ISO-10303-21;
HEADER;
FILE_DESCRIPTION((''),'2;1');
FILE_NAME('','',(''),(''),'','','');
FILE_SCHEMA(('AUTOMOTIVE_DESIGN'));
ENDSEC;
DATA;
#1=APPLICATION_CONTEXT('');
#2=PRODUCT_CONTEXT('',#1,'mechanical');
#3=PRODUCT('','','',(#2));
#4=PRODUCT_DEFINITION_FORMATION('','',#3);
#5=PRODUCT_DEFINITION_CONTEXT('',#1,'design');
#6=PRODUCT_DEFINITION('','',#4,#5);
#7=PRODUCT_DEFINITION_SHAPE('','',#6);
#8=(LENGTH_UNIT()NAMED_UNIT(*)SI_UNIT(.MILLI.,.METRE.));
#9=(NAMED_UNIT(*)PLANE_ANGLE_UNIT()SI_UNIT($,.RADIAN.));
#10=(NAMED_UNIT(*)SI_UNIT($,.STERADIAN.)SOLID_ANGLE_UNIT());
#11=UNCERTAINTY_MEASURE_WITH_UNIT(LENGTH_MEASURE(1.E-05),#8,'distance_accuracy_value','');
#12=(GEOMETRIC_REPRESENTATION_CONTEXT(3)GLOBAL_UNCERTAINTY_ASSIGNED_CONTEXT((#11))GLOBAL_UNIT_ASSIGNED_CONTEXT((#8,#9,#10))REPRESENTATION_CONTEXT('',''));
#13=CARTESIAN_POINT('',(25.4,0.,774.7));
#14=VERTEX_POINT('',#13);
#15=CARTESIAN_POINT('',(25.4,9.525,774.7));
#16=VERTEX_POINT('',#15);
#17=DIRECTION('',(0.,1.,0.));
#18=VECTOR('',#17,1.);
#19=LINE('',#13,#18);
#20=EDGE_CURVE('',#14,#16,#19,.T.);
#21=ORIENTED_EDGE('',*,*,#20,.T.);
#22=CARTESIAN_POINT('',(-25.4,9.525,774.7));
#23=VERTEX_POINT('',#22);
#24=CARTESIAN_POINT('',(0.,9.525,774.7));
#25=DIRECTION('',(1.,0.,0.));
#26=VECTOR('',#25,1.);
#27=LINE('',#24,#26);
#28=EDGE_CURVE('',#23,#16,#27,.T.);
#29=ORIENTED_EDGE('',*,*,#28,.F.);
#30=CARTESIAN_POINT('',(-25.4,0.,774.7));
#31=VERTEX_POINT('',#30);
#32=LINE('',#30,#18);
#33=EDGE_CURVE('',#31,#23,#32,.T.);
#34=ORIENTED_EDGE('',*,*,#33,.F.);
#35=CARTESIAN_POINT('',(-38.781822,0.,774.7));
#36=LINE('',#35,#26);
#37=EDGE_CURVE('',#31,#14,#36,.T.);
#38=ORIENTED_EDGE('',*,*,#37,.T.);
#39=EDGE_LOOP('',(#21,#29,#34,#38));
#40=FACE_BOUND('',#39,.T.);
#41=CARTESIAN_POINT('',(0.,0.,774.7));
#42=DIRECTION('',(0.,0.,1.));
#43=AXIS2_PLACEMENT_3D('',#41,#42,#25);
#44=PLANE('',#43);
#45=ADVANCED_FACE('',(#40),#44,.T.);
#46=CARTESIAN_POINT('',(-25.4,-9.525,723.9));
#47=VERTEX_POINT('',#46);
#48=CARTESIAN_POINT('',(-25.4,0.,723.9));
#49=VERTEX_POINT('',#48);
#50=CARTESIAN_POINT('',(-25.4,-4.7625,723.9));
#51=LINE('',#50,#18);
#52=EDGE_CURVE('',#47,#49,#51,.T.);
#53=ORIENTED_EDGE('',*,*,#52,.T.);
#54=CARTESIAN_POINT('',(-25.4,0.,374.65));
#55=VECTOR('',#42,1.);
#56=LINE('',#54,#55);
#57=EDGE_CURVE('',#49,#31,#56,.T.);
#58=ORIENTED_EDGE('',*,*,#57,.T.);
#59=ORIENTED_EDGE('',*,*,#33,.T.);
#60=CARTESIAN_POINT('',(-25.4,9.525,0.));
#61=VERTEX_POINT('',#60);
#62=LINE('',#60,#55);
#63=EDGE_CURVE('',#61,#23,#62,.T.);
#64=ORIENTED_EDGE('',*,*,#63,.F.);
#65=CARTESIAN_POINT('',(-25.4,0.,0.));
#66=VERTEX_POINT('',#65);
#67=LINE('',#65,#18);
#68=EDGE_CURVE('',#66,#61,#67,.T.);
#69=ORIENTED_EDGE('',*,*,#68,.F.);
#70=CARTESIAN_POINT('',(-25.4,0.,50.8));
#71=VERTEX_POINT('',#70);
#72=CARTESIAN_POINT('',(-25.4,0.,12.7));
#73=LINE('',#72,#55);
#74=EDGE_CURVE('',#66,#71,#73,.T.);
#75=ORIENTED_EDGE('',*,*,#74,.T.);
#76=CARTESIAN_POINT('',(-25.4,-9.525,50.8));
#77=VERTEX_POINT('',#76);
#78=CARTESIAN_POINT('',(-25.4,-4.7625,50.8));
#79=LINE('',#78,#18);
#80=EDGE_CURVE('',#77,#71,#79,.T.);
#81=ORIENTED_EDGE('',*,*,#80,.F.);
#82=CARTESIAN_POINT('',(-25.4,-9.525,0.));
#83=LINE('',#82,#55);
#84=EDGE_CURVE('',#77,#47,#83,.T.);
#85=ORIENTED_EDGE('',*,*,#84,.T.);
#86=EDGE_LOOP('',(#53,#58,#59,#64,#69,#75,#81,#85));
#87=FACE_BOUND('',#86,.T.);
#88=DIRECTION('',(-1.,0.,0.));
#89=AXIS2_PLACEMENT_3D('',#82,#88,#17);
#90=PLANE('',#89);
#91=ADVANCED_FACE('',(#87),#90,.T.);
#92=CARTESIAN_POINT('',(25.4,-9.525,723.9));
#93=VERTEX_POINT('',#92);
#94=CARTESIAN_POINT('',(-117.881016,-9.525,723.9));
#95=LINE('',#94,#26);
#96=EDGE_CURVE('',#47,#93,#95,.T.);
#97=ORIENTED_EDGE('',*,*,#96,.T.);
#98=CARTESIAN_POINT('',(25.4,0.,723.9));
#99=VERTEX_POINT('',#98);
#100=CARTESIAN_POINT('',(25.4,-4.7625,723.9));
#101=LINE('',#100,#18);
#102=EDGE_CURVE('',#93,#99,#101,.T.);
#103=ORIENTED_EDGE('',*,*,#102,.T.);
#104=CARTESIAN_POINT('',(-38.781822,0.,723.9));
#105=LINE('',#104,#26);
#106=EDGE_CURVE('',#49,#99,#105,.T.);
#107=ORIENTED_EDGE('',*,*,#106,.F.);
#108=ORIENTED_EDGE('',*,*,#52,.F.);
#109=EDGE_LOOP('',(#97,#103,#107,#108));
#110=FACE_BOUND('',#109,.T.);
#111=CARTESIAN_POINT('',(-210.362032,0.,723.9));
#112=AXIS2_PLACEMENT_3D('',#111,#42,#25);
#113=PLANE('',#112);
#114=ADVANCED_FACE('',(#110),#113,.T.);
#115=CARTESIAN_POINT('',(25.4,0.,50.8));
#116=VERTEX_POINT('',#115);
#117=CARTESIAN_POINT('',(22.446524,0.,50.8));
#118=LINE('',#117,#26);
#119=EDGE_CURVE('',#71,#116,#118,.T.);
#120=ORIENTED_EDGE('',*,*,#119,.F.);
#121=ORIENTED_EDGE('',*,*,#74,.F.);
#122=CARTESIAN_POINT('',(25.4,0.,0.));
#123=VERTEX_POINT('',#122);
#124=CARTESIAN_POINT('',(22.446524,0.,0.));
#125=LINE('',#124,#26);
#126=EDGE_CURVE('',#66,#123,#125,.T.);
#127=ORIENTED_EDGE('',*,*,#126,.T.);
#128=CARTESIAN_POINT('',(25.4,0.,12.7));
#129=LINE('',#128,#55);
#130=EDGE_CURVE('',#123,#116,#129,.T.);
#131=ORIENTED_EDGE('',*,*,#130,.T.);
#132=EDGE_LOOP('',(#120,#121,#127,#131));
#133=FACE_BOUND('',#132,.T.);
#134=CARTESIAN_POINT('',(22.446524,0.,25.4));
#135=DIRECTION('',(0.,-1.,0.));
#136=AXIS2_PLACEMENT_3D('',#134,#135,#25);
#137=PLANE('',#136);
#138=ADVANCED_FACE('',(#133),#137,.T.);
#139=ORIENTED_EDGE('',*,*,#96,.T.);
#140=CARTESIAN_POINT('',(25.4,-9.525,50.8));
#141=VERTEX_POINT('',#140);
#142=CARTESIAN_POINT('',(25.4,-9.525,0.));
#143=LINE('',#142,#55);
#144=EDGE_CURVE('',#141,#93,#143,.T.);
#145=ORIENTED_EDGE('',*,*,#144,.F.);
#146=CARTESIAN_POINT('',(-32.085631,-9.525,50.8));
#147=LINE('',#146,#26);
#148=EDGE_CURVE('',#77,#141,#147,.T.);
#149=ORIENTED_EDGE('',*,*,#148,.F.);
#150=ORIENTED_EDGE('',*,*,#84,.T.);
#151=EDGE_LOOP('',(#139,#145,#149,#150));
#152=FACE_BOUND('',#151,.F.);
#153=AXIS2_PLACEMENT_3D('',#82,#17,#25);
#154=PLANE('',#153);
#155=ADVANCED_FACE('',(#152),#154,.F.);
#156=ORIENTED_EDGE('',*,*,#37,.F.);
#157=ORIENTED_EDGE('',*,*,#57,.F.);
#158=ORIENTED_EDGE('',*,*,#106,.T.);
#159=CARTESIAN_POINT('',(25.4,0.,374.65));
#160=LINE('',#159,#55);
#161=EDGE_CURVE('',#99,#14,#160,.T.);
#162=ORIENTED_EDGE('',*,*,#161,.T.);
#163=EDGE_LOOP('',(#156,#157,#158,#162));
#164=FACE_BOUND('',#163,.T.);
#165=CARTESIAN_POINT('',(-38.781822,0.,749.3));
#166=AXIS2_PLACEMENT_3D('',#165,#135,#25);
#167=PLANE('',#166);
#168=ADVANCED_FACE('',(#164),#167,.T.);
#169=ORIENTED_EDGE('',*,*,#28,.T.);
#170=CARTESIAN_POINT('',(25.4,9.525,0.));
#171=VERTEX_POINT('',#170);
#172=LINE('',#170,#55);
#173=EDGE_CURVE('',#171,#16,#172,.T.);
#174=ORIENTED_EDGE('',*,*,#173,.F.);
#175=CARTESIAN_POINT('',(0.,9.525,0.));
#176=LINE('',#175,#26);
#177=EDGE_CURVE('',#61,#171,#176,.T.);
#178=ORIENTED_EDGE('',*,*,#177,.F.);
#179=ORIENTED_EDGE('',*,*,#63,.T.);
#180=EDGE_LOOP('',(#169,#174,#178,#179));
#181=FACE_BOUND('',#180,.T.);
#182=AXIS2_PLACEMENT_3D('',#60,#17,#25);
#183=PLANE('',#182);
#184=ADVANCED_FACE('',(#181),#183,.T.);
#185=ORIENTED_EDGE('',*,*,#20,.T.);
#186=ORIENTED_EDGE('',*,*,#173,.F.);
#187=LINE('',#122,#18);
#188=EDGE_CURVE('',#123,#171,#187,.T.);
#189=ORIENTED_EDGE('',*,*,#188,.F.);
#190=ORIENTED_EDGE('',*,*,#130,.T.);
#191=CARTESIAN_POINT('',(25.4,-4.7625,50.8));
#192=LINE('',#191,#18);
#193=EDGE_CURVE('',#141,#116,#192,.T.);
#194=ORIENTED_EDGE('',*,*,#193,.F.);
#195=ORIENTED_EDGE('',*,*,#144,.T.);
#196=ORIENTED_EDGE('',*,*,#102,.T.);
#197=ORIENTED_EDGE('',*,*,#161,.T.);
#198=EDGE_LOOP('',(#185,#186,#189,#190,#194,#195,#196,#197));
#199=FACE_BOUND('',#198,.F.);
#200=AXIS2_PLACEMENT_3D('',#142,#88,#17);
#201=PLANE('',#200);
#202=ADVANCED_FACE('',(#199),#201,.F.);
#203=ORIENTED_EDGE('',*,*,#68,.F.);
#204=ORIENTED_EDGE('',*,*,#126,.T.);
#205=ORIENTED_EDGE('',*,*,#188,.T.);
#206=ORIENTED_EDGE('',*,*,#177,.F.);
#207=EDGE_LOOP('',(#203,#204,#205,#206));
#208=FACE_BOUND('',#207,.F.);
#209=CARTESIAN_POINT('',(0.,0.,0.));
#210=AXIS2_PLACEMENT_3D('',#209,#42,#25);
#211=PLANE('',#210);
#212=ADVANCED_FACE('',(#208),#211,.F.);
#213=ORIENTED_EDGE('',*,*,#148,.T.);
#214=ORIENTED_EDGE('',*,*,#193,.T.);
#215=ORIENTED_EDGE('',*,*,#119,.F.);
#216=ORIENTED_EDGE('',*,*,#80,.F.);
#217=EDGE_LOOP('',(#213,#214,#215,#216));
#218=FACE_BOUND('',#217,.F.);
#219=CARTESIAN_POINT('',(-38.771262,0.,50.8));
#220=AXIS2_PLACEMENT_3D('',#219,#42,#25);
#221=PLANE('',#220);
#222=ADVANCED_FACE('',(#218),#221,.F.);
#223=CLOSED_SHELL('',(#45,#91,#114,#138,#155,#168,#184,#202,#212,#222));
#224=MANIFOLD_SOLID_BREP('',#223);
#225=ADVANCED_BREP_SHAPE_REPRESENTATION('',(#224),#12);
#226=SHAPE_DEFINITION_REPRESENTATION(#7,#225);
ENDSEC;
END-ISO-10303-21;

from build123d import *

# Parameters (mm, degrees)
F0_W     = 50.8
F0_H     = 19.05
F1_DEPTH = 774.7
F2_W     = 122.43557321
F2_H     = 50.8
F2_W_2   = 343.1604206562
F3_DEPTH = 25.4


# Not quite as in the source:
# - a feature names something its author has since deleted; it is built from what else it names


with BuildPart() as f1:
    # F0 (on Top) → F1 (new body)
    with BuildSketch(Plane.XY):
        Rectangle(F0_W, F0_H)
    extrude(amount=F1_DEPTH)

    # F2 (on Front) → F3 (cut)
    with BuildSketch(Plane.XZ):
        with Locations((22.4465244144, 25.4)):
            Rectangle(F2_W, F2_H)
        with Locations((-38.7818217278, 749.3)):
            Rectangle(F2_W_2, F2_H)
    extrude(amount=F3_DEPTH, mode=Mode.SUBTRACT)


solid = f1.part
